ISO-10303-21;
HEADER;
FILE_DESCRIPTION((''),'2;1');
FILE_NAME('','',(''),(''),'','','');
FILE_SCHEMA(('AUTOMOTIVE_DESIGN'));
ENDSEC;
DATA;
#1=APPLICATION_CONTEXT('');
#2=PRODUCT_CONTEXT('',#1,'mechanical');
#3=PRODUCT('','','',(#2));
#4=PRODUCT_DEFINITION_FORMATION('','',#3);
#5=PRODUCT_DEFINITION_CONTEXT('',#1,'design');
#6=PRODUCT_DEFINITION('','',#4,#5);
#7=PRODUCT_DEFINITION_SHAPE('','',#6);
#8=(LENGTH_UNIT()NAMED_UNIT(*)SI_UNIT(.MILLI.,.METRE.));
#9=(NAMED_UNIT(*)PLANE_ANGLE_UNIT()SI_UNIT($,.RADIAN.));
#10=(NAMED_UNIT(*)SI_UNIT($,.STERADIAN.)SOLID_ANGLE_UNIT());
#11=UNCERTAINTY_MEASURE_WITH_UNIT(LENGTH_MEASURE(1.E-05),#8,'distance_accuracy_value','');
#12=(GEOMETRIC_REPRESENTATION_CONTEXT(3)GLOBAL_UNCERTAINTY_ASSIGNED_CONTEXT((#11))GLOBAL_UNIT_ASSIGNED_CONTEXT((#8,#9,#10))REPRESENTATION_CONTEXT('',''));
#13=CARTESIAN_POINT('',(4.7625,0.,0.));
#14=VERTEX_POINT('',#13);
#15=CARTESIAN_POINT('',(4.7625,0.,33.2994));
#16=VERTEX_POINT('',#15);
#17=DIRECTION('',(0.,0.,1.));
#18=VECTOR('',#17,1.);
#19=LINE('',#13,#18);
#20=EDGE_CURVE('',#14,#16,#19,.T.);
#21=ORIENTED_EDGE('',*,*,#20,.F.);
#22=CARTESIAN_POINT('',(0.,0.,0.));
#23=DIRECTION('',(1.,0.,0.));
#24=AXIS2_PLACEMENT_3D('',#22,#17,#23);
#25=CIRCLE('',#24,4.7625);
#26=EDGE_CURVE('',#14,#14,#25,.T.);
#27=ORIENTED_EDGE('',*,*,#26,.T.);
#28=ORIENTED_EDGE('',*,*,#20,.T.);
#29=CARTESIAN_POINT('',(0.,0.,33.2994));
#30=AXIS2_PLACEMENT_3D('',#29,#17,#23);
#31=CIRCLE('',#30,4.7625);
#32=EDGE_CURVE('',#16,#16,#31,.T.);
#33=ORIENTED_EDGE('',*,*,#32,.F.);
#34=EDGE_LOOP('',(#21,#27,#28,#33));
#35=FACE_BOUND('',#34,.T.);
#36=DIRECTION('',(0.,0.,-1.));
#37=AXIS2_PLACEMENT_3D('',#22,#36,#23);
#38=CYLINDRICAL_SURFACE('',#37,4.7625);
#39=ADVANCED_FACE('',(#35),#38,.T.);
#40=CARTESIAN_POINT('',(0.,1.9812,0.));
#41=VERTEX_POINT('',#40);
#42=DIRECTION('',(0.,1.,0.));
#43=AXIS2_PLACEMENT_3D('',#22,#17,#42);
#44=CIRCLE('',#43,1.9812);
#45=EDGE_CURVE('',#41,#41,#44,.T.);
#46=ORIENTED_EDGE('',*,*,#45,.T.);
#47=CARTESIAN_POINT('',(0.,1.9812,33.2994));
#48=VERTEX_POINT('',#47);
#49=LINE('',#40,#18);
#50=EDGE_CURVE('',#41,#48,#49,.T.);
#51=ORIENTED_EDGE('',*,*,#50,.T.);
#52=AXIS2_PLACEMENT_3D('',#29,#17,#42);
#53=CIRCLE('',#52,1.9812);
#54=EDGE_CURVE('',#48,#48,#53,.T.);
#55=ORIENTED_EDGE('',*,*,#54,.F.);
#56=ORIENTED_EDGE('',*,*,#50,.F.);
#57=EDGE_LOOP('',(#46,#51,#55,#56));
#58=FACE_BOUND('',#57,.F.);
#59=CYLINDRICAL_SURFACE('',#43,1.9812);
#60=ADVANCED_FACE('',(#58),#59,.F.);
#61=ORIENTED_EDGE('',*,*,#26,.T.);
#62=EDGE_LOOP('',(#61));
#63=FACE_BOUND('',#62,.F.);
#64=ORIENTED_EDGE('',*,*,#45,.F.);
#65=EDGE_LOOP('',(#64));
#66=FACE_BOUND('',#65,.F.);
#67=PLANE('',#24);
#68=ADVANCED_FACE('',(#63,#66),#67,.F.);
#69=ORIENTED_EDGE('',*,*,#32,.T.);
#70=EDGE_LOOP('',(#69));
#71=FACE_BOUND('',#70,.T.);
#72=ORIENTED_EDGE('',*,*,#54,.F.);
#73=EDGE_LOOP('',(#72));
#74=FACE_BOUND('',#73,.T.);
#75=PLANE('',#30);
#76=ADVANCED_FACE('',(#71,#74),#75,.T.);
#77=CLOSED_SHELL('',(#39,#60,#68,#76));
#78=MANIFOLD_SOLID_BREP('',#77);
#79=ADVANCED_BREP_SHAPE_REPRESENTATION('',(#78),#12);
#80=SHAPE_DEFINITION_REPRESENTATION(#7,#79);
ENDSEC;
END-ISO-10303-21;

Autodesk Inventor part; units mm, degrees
ref_plane "YZ Plane" through (0, 0, 0) normal (1, 0, 0) x (0, 1, 0)
ref_plane "XZ Plane" through (0, 0, 0) normal (0, 1, 0) x (-1, 0, 0)
ref_plane "XY Plane" through (0, 0, 0) normal (0, 0, 1) x (1, 0, 0)
sketch "Sketch1" plane through (0, 0, 0) normal (0, 0, 1) x (1, 0, 0)
  circle A0 centre (0, 0) radius 4.7625
  dimension "d10" = 9.525
extrude "Extrusion1" add sketch "Sketch1" along normal blind 33.2994
hole "Hole1" at (0, 0, 0) direction (0, 0, 1) diameter 3.9624 end through all thread size "10-32 UNF" class "2B" standard "ANSI Unified Screw Threads"
equation "\"d10\" = OutsideDiameter"
equation "\"d1\" = StandoffLength"
equation "\"StandoffLength\" = 33.2994"
equation "\"HoleDiameter\" = 5.1054"
equation "\"OutsideDiameter\" = 9.525"
properties part number "GP5-028" material "Aluminum 6061"
